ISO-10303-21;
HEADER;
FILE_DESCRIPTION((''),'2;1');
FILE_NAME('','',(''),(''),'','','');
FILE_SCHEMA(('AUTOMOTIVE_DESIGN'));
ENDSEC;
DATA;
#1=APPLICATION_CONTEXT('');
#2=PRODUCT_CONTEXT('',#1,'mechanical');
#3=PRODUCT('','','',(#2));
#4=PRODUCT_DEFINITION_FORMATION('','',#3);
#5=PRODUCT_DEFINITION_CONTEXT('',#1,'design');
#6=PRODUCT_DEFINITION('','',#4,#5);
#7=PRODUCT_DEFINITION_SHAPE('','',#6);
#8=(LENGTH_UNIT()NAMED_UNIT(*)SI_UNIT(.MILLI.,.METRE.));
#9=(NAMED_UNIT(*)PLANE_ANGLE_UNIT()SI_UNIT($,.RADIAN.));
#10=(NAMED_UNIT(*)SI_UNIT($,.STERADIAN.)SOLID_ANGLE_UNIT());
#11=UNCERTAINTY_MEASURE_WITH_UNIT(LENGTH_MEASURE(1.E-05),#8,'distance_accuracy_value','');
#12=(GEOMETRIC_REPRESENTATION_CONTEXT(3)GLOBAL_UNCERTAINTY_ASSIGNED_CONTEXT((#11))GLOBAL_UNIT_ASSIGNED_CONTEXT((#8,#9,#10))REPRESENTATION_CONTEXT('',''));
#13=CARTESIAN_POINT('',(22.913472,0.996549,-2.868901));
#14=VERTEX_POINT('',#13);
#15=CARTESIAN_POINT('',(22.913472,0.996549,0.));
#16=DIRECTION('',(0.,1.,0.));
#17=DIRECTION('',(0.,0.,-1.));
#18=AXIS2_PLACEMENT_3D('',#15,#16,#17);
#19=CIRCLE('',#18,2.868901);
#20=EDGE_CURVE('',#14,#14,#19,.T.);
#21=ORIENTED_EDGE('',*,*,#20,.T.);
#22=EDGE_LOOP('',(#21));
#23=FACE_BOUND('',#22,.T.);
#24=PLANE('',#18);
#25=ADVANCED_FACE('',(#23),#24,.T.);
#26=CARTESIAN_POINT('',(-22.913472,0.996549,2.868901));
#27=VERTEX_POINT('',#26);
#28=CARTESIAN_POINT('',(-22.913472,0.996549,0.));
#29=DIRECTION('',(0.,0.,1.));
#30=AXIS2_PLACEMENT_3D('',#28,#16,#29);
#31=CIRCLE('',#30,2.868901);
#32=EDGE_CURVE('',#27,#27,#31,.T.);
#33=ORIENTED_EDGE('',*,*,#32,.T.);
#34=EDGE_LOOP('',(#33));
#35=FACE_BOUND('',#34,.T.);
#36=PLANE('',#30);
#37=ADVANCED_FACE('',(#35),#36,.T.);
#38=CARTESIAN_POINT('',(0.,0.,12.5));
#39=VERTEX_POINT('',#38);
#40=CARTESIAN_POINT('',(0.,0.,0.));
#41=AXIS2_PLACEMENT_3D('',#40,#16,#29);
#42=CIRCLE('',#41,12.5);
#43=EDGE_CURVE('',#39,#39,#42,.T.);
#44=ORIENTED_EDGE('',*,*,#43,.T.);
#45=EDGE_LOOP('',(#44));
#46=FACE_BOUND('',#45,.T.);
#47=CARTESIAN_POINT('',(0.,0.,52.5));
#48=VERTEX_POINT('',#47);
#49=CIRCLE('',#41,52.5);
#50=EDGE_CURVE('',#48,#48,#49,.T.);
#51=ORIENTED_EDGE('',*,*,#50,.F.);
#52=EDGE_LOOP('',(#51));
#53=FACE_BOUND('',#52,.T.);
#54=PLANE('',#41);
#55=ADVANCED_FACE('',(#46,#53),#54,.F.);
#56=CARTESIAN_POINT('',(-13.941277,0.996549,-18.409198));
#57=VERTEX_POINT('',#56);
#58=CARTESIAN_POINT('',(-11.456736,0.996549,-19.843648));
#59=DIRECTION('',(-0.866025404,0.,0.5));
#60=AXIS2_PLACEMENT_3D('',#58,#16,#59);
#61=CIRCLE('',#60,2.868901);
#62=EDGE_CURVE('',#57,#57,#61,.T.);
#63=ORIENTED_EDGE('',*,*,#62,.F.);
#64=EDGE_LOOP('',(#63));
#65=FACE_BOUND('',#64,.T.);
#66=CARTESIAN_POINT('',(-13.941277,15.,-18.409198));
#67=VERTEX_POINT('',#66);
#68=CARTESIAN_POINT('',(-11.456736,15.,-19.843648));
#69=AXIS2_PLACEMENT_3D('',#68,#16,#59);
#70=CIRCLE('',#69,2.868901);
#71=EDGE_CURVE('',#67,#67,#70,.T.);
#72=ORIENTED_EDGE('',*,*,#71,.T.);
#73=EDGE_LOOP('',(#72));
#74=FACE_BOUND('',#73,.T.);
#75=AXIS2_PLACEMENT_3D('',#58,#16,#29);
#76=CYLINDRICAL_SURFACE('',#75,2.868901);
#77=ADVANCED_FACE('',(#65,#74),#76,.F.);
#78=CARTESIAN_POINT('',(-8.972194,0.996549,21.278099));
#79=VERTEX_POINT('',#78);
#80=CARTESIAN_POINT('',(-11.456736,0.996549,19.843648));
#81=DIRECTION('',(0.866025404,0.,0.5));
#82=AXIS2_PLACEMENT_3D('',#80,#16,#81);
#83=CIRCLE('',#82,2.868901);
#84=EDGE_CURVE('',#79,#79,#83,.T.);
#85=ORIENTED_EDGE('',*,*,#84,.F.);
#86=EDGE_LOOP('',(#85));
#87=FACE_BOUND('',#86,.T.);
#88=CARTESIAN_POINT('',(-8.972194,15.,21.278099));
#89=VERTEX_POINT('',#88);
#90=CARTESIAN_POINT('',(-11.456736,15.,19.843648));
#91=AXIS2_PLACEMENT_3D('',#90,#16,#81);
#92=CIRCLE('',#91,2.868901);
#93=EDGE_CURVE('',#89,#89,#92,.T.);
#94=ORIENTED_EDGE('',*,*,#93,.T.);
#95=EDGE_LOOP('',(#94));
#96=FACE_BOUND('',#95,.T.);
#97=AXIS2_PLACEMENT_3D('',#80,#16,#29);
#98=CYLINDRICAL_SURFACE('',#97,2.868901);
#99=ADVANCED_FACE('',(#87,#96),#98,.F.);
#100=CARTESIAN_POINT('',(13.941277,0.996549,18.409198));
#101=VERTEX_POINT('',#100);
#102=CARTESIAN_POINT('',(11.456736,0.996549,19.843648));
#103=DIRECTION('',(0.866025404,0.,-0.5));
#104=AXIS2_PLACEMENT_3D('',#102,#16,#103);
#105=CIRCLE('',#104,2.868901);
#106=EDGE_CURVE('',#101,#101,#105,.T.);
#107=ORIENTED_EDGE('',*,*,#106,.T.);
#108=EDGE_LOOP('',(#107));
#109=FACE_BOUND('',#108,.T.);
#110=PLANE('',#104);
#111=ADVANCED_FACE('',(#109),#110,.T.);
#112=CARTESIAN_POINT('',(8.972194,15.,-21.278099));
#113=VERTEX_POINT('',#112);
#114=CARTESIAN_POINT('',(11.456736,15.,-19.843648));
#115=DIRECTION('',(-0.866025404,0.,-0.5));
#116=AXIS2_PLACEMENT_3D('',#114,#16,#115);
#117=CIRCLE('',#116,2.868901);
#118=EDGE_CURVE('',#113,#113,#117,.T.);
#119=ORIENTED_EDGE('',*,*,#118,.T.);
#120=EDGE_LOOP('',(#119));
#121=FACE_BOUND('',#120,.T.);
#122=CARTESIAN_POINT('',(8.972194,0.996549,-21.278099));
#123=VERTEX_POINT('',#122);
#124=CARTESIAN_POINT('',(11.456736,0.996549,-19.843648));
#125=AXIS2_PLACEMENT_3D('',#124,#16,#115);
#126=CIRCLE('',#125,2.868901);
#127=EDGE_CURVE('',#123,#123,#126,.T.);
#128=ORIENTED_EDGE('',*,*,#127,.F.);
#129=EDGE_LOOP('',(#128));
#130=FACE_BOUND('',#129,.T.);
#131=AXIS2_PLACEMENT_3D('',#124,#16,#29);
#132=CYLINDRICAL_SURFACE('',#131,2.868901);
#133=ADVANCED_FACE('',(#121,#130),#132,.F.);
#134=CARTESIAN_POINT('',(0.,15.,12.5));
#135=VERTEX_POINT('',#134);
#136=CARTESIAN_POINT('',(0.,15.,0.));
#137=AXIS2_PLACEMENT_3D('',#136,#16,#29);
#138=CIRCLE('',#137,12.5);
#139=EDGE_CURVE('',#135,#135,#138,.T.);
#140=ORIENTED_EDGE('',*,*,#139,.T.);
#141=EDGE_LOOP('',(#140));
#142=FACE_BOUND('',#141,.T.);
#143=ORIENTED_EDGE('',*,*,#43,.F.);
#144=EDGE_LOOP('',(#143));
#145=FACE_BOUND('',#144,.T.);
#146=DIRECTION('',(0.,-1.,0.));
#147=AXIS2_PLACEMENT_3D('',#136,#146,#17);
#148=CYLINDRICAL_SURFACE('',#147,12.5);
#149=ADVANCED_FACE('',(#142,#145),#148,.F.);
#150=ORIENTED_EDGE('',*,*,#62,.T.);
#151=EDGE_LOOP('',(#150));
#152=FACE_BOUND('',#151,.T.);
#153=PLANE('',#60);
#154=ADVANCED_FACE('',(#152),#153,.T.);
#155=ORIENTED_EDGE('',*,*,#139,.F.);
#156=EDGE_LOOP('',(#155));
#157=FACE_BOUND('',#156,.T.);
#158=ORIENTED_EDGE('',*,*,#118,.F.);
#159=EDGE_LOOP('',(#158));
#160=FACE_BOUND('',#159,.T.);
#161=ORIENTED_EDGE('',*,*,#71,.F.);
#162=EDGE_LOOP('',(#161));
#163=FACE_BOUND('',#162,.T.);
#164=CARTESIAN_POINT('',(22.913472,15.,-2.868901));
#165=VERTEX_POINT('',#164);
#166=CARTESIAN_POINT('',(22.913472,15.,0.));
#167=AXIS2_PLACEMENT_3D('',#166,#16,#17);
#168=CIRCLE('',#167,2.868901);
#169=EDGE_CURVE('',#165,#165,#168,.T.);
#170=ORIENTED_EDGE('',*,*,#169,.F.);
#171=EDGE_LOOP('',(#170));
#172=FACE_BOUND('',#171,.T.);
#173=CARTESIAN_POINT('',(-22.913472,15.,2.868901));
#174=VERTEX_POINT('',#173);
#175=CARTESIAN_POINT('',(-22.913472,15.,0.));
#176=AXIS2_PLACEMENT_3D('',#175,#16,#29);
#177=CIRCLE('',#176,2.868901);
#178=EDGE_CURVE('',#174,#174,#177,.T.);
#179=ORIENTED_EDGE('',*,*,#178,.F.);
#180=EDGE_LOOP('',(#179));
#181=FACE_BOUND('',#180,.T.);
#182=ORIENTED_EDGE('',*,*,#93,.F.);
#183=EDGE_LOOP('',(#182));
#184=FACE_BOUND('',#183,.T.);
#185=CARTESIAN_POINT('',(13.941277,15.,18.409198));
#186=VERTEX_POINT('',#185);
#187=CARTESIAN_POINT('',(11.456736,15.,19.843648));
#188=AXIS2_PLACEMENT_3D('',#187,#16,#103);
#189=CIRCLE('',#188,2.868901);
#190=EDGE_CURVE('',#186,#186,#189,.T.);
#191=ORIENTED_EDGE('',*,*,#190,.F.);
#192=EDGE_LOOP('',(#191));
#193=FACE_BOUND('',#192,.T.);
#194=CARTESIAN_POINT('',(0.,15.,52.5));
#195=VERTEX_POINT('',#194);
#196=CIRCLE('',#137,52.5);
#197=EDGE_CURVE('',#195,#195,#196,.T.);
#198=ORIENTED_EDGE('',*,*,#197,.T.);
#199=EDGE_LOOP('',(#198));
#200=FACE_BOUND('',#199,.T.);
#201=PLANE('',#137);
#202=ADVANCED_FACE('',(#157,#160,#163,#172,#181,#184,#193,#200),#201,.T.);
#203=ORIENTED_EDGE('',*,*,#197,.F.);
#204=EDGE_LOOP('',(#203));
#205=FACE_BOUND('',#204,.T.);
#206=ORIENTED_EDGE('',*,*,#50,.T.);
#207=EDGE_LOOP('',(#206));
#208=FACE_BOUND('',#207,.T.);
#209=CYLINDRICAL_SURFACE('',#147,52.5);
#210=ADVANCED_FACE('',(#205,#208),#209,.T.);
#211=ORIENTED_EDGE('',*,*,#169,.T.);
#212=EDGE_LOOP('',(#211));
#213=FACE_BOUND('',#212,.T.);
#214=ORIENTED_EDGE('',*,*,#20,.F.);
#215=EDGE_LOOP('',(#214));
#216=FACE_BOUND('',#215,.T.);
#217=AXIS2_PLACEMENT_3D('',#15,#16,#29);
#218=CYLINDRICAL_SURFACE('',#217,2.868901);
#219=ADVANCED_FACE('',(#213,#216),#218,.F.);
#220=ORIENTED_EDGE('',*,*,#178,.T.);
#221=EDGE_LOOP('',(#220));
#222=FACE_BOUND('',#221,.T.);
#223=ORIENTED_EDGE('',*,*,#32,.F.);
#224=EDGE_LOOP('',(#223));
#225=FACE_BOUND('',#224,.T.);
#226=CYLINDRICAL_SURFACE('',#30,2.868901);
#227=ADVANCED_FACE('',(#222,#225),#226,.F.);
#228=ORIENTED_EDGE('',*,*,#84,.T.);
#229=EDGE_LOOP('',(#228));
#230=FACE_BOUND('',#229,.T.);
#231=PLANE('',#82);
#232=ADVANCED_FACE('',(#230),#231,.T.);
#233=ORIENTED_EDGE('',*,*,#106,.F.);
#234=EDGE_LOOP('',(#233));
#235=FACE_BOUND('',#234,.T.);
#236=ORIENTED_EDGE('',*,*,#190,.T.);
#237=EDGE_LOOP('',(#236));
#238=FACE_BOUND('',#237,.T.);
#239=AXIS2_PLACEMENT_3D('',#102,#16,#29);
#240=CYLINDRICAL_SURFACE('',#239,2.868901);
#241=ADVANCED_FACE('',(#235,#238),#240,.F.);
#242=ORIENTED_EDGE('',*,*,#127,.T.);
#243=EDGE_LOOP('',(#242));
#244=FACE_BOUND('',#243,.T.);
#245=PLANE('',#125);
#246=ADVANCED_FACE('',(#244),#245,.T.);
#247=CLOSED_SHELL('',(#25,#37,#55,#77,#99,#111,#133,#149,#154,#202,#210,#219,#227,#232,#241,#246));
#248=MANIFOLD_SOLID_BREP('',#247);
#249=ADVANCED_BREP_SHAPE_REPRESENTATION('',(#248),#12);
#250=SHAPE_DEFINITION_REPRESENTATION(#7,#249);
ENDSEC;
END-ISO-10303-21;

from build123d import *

# Parameters (mm, degrees)
SKETCH1_R           = 52.5
BOSS_EXTRUDE1_DEPTH = 15
SKETCH2_R           = 12.5
CUT_EXTRUDE1_DEPTH  = 76.746287038
SKETCH3_R           = 2.868901353
CUT_EXTRUDE2_DEPTH  = 14.003451283
CIRPATTERN1_COUNT   = 6


with BuildPart() as part:
    # Sketch1 → Boss-Extrude1 (new body)
    with BuildSketch(Plane(origin=(0, 0, 0), x_dir=(1, 0, 0), z_dir=(0, 1, 0))):
        Circle(SKETCH1_R)
    extrude(amount=BOSS_EXTRUDE1_DEPTH)

    # Sketch2 → Cut-Extrude1 (cut, through all)
    with BuildSketch(Plane(origin=(0, 0, 0), x_dir=(1, 0, 0), z_dir=(0, 1, 0))):
        Circle(SKETCH2_R)
    extrude(amount=CUT_EXTRUDE1_DEPTH, mode=Mode.SUBTRACT)

    # Sketch3 → Cut-Extrude2 (cut)
    with BuildSketch(Plane(origin=(0, 15, 0), x_dir=(1, 0, 0), z_dir=(0, 1, 0))):
        with Locations((-22.913471565, 0)):
            Circle(SKETCH3_R)
    cut_extrude2 = extrude(amount=-CUT_EXTRUDE2_DEPTH, mode=Mode.SUBTRACT)

    # CirPattern1: Cut-Extrude2 ×6 about axis
    cirpattern1_axis = Axis((0, 0, 0), (0, 1, 0))
    for i in range(1, CIRPATTERN1_COUNT):
        add(cut_extrude2.rotate(cirpattern1_axis, i * 360 / CIRPATTERN1_COUNT), mode=Mode.SUBTRACT)


solid = part.part
